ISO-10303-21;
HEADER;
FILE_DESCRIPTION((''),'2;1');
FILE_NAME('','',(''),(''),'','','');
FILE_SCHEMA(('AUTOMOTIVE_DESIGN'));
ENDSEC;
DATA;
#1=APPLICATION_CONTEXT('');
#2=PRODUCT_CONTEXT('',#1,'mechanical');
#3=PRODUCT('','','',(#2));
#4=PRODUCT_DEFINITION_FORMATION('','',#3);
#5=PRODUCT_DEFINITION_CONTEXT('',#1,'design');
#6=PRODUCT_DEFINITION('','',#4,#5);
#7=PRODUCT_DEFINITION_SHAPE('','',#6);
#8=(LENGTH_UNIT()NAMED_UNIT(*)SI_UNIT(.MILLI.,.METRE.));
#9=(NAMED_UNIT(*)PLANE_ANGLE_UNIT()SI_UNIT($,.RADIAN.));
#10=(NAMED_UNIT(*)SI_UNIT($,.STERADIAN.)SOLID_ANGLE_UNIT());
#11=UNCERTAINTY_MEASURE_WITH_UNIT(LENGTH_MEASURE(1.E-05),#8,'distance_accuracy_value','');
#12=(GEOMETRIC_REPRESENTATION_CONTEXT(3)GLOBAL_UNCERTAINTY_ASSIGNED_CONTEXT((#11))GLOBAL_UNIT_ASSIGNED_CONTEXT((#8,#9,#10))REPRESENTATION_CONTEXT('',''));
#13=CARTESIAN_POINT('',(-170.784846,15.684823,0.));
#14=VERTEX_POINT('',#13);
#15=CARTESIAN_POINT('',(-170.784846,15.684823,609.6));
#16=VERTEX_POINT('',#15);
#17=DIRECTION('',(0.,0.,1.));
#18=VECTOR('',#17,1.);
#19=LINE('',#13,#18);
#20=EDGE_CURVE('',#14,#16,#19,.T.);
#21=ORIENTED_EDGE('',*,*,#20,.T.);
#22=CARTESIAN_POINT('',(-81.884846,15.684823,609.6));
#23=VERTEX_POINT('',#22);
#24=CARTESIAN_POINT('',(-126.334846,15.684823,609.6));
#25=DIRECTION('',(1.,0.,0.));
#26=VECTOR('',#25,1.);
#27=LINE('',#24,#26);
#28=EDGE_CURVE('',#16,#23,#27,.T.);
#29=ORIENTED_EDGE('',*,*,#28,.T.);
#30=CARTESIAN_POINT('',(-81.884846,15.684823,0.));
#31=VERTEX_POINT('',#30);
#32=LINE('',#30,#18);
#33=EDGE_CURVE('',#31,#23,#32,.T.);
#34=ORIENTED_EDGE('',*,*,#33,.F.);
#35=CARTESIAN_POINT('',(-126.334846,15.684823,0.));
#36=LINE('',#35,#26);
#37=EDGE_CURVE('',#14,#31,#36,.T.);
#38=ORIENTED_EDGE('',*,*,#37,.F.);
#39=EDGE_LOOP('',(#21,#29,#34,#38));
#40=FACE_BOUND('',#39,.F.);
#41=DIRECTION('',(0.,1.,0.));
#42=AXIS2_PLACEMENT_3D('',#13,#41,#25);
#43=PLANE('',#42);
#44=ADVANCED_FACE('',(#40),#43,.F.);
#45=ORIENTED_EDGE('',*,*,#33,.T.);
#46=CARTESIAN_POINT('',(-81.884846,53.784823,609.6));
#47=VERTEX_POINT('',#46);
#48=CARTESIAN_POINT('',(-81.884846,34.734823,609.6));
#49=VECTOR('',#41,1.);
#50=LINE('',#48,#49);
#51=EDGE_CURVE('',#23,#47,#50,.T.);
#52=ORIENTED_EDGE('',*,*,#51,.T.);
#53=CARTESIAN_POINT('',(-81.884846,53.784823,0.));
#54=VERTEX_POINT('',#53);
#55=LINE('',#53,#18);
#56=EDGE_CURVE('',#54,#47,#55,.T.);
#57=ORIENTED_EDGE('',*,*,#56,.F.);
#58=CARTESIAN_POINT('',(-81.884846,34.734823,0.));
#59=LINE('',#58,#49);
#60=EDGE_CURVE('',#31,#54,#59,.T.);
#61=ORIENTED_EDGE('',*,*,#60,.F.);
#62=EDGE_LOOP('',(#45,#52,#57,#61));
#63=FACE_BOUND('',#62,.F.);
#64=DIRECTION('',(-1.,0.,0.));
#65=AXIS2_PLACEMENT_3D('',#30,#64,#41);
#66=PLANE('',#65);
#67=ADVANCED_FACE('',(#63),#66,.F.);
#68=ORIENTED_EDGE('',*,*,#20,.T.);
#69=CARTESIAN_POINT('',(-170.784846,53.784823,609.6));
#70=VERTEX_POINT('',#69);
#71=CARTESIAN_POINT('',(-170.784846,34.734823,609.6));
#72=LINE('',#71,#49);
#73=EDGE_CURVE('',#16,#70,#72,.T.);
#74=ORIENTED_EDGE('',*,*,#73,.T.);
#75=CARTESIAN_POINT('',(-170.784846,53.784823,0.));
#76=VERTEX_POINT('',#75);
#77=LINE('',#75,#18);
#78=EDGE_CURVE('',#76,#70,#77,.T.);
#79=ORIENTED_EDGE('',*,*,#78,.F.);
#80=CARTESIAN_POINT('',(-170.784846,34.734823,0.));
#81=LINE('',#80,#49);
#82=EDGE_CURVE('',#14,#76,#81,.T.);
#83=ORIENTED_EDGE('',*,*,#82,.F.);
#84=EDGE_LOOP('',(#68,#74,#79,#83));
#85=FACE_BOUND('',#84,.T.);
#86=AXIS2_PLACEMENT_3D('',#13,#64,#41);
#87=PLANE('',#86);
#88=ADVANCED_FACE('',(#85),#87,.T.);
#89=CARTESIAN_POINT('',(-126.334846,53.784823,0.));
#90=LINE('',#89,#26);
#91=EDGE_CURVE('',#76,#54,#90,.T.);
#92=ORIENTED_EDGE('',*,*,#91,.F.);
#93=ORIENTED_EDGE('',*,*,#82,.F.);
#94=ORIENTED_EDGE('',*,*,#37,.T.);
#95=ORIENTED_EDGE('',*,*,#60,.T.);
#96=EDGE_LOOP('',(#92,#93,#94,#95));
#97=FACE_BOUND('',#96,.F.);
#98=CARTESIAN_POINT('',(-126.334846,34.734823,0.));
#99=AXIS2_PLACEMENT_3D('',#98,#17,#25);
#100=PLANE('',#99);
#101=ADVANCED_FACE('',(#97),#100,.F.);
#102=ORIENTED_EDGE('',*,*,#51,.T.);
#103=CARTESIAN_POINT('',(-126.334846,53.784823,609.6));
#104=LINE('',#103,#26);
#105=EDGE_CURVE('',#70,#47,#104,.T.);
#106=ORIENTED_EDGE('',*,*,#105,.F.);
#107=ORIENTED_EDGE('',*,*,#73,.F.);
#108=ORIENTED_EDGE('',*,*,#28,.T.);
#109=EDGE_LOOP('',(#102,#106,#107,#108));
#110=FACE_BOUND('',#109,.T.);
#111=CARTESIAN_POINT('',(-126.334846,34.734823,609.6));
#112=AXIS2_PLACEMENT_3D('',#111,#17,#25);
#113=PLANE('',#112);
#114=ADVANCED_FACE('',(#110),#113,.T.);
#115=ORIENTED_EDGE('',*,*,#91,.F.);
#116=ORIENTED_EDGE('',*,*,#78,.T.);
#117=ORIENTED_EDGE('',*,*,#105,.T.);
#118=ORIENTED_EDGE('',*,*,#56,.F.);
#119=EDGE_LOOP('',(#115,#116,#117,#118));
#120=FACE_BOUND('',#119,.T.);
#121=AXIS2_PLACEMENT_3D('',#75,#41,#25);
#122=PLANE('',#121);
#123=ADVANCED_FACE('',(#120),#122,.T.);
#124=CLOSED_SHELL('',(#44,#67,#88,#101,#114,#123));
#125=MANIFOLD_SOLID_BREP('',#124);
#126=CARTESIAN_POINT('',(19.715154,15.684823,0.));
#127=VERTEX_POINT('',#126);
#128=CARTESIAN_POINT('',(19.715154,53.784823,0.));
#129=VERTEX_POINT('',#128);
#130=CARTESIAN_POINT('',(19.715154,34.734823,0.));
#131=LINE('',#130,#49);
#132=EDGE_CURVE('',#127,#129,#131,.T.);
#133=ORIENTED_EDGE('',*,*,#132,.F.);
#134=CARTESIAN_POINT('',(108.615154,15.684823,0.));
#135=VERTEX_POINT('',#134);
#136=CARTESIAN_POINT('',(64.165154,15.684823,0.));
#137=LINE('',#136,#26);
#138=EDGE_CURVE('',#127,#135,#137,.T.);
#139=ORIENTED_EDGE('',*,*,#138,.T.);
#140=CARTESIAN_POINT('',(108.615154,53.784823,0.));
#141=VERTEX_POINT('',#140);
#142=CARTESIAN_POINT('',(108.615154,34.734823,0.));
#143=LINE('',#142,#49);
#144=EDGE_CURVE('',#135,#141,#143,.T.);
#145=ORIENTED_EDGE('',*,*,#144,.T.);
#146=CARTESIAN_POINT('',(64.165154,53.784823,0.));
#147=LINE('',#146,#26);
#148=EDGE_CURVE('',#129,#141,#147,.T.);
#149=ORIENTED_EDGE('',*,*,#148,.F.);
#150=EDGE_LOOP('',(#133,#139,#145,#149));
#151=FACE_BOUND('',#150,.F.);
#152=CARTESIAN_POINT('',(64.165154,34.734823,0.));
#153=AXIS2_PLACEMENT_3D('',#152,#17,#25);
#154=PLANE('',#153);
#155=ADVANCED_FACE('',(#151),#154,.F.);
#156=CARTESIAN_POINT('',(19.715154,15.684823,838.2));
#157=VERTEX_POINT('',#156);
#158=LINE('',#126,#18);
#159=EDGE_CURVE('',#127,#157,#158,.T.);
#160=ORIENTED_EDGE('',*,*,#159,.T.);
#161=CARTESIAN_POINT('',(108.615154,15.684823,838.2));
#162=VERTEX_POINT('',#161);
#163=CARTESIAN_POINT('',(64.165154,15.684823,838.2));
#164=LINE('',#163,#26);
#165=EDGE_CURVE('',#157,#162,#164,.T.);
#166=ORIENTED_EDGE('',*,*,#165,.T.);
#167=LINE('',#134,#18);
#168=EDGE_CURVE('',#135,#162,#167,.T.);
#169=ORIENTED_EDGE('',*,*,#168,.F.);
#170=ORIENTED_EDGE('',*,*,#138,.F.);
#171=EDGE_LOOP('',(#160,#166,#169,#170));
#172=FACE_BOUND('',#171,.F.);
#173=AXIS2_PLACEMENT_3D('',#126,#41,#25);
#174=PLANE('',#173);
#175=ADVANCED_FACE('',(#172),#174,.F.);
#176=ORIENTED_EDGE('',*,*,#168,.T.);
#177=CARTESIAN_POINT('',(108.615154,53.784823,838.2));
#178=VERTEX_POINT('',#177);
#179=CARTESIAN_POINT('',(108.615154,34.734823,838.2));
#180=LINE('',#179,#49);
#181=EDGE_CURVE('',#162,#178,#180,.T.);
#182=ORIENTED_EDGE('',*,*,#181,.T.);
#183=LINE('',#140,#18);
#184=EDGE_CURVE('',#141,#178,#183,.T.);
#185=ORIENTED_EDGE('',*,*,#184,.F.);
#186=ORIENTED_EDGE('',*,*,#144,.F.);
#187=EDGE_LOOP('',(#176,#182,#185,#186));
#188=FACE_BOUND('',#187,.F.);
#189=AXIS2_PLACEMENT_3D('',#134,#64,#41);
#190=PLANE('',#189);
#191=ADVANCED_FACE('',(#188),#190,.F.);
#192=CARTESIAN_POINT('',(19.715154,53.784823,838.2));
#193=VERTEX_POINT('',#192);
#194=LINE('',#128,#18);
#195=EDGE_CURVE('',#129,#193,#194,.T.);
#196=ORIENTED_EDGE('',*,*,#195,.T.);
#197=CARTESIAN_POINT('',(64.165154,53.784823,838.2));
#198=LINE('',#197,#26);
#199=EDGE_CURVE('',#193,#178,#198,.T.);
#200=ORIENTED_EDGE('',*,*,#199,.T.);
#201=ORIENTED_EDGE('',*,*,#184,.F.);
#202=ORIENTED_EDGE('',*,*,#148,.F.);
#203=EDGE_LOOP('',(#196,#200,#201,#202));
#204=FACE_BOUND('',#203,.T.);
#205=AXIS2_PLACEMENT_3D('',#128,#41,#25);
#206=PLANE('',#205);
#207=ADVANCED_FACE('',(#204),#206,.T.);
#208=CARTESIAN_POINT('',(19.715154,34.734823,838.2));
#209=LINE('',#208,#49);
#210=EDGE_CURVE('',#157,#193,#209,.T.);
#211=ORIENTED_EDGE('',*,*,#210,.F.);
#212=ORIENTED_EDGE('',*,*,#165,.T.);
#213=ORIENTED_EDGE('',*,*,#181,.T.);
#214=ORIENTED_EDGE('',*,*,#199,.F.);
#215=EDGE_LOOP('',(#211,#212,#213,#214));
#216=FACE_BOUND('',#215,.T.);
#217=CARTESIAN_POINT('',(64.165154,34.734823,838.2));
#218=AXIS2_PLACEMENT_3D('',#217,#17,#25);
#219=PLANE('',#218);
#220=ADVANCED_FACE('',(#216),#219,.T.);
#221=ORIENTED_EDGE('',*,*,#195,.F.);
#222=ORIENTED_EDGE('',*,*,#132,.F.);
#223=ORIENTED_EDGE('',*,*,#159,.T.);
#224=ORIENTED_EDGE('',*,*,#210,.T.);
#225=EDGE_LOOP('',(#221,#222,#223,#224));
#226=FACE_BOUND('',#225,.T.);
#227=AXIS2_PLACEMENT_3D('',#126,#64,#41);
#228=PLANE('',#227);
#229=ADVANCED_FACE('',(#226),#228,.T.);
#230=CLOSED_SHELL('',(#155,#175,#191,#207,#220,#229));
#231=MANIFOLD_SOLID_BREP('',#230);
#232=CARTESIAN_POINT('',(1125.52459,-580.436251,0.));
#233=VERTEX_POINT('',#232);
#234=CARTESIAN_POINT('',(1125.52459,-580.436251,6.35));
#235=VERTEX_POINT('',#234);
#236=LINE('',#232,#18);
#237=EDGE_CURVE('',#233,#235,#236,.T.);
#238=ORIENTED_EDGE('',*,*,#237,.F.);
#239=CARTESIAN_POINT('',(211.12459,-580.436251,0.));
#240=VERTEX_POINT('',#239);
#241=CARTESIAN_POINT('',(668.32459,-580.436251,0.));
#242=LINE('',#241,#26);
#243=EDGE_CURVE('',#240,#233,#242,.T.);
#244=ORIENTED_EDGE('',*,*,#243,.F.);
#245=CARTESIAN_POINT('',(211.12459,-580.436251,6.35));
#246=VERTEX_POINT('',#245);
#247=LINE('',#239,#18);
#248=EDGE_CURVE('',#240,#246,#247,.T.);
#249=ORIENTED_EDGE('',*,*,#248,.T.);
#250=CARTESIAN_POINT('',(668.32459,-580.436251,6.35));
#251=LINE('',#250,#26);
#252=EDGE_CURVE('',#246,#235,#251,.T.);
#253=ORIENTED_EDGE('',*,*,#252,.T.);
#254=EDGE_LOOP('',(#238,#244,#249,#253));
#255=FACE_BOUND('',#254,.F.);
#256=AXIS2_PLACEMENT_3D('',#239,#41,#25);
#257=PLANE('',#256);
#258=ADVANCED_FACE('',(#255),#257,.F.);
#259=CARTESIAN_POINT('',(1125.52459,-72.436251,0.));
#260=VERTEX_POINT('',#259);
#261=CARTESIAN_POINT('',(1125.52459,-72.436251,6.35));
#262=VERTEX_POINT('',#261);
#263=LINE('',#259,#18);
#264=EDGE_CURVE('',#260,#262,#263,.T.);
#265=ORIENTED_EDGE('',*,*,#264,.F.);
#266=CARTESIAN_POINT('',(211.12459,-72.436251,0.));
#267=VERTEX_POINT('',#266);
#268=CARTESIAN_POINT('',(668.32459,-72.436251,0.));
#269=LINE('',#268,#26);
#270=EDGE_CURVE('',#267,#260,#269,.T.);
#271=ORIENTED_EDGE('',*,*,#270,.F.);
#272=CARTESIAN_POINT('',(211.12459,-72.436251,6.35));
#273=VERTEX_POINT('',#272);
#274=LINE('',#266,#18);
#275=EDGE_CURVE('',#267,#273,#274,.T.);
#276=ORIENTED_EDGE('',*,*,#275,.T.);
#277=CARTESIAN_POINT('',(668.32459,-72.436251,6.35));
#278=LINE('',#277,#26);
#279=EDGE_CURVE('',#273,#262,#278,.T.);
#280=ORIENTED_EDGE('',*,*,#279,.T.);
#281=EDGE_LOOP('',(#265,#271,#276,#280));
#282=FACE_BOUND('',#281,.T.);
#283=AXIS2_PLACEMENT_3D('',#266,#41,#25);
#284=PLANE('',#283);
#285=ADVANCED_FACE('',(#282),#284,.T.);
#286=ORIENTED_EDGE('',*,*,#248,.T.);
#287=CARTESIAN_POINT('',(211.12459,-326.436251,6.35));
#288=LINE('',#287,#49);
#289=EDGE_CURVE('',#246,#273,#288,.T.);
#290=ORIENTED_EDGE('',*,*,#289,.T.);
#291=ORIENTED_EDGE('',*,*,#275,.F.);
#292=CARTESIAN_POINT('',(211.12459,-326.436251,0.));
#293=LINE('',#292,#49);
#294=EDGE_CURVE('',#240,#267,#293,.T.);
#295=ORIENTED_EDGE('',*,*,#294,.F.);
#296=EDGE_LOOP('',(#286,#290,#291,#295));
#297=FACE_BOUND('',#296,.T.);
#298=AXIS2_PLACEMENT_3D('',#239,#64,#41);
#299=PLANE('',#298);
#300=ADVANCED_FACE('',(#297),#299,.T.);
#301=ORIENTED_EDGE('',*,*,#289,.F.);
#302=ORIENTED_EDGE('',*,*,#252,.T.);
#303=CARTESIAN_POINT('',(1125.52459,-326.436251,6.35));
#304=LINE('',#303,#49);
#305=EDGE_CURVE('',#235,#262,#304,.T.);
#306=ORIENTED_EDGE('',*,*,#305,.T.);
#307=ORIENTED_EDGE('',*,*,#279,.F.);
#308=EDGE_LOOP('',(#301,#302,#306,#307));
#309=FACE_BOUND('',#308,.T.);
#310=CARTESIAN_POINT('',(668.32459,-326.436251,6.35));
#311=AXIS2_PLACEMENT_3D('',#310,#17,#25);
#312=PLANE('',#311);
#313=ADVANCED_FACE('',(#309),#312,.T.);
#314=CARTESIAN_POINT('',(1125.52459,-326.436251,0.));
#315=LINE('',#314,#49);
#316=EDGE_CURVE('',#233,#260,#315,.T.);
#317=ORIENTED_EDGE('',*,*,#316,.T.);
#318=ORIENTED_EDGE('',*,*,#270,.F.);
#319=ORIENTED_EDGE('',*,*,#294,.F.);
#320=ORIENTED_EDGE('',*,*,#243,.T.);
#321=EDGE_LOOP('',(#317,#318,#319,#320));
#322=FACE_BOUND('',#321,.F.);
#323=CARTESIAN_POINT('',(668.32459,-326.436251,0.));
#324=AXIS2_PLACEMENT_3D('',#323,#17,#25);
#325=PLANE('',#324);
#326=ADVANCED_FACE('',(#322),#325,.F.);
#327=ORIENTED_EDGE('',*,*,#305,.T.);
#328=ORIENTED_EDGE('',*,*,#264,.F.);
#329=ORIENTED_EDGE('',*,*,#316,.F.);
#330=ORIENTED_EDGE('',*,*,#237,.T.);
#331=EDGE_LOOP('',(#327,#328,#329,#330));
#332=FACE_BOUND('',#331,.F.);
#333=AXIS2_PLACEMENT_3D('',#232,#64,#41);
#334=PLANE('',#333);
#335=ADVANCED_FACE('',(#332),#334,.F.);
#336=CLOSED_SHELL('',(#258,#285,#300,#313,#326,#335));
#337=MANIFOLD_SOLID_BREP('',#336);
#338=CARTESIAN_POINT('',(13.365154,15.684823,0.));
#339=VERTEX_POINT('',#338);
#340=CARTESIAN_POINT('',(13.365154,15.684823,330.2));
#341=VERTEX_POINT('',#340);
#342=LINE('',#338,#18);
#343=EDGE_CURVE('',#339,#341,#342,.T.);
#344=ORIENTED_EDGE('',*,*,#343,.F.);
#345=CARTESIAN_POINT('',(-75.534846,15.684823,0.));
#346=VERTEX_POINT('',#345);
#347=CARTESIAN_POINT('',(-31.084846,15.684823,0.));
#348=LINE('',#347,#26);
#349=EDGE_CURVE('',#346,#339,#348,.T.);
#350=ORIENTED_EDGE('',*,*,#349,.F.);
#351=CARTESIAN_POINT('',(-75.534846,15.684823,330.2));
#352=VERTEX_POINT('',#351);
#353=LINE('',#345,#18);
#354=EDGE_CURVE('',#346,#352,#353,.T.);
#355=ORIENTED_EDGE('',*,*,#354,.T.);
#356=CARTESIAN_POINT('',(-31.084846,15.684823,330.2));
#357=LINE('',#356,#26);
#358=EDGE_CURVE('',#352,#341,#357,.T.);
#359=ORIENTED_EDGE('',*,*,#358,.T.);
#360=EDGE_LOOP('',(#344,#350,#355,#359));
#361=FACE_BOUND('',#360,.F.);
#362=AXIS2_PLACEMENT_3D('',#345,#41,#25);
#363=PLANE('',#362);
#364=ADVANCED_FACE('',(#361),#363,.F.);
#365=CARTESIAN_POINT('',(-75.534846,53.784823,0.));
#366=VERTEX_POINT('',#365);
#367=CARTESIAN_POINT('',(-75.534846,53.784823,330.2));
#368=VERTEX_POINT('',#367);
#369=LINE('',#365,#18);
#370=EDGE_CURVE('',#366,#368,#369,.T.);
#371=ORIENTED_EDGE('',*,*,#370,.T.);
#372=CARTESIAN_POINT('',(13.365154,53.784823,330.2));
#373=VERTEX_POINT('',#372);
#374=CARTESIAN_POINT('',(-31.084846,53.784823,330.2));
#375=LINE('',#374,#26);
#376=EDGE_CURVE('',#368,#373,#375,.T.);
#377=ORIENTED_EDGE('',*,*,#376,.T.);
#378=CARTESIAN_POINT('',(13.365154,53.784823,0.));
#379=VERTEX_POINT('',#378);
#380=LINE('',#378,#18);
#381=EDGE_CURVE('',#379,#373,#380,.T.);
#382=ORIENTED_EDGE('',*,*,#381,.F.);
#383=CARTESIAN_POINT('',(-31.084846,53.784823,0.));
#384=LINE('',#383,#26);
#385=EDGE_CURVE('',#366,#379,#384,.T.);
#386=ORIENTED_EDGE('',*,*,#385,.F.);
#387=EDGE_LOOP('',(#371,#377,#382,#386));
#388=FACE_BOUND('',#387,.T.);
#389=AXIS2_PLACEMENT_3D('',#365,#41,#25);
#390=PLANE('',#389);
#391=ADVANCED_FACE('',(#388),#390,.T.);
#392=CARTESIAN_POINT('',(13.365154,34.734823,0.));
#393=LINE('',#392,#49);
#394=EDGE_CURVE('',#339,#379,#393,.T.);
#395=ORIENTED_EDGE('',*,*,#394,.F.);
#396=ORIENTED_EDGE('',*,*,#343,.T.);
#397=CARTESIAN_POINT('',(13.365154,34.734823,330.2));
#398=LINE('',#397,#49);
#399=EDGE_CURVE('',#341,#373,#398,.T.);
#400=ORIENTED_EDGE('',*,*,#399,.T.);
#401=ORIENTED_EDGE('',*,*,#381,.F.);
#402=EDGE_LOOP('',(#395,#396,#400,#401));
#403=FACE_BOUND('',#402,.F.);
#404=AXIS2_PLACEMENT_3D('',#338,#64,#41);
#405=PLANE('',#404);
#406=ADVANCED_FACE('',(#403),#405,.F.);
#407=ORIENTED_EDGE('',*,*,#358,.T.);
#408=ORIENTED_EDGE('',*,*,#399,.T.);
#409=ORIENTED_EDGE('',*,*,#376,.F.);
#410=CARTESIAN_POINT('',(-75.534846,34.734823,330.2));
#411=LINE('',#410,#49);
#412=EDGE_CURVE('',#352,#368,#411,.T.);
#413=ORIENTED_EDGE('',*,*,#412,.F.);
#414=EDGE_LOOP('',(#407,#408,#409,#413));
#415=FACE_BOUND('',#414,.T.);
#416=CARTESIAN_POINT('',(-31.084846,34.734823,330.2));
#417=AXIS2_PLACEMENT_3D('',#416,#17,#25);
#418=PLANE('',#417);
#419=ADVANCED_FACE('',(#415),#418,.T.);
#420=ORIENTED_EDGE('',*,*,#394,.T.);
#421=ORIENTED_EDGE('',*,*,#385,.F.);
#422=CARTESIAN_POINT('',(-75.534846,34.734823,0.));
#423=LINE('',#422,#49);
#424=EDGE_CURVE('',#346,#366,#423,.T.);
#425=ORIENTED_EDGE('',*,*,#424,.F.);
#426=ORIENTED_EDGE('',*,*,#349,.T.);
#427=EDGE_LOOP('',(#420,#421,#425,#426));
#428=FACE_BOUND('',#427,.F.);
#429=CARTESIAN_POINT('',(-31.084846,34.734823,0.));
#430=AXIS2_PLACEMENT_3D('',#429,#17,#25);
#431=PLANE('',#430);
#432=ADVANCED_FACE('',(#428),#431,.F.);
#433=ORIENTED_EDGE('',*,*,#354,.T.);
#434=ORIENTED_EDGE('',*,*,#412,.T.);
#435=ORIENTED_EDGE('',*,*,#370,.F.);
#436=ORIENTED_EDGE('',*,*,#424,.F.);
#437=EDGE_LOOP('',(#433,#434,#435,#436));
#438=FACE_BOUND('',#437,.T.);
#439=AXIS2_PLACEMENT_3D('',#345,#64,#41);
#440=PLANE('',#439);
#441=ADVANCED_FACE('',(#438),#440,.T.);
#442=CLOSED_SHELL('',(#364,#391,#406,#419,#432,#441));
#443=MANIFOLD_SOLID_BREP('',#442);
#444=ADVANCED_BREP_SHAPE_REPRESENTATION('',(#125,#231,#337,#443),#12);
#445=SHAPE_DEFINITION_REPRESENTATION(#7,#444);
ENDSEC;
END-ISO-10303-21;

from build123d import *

# Parameters (mm, degrees)
F4_W     = 88.9
F4_H     = 38.1
F5_DEPTH = 609.6
F6_DEPTH = 330.2
F7_DEPTH = 838.2
F8_W     = 914.4
F8_H     = 508
F9_DEPTH = 6.35


# Not quite as in the source:
# - a length typed as a fraction of an inch, garbled in the dataset ("3 / 203.2 mm" for 3/8 in), is restored


with BuildPart() as f5:
    # F4 (on Top) → F5 (new body)
    with BuildSketch(Plane.XY):
        with Locations((-126.334846382, 34.7348225479)):
            Rectangle(F4_W, F4_H)
    extrude(amount=F5_DEPTH)


with BuildPart() as f6:
    # F4 (on Top) → F6 (new body)
    with BuildSketch(Plane.XY):
        with Locations((-31.084846382, 34.7348225479)):
            Rectangle(F4_W, F4_H)
    extrude(amount=F6_DEPTH)


with BuildPart() as f7:
    # F4 (on Top) → F7 (new body)
    with BuildSketch(Plane.XY):
        with Locations((64.165153618, 34.7348225479)):
            Rectangle(F4_W, F4_H)
    extrude(amount=F7_DEPTH)


with BuildPart() as f9:
    # F8 (on Top) → F9 (new body)
    with BuildSketch(Plane.XY):
        with Locations((668.3245897293, -326.4362514019)):
            Rectangle(F8_W, F8_H)
    extrude(amount=F9_DEPTH)


solid = Compound([f5.part, f6.part, f7.part, f9.part])
